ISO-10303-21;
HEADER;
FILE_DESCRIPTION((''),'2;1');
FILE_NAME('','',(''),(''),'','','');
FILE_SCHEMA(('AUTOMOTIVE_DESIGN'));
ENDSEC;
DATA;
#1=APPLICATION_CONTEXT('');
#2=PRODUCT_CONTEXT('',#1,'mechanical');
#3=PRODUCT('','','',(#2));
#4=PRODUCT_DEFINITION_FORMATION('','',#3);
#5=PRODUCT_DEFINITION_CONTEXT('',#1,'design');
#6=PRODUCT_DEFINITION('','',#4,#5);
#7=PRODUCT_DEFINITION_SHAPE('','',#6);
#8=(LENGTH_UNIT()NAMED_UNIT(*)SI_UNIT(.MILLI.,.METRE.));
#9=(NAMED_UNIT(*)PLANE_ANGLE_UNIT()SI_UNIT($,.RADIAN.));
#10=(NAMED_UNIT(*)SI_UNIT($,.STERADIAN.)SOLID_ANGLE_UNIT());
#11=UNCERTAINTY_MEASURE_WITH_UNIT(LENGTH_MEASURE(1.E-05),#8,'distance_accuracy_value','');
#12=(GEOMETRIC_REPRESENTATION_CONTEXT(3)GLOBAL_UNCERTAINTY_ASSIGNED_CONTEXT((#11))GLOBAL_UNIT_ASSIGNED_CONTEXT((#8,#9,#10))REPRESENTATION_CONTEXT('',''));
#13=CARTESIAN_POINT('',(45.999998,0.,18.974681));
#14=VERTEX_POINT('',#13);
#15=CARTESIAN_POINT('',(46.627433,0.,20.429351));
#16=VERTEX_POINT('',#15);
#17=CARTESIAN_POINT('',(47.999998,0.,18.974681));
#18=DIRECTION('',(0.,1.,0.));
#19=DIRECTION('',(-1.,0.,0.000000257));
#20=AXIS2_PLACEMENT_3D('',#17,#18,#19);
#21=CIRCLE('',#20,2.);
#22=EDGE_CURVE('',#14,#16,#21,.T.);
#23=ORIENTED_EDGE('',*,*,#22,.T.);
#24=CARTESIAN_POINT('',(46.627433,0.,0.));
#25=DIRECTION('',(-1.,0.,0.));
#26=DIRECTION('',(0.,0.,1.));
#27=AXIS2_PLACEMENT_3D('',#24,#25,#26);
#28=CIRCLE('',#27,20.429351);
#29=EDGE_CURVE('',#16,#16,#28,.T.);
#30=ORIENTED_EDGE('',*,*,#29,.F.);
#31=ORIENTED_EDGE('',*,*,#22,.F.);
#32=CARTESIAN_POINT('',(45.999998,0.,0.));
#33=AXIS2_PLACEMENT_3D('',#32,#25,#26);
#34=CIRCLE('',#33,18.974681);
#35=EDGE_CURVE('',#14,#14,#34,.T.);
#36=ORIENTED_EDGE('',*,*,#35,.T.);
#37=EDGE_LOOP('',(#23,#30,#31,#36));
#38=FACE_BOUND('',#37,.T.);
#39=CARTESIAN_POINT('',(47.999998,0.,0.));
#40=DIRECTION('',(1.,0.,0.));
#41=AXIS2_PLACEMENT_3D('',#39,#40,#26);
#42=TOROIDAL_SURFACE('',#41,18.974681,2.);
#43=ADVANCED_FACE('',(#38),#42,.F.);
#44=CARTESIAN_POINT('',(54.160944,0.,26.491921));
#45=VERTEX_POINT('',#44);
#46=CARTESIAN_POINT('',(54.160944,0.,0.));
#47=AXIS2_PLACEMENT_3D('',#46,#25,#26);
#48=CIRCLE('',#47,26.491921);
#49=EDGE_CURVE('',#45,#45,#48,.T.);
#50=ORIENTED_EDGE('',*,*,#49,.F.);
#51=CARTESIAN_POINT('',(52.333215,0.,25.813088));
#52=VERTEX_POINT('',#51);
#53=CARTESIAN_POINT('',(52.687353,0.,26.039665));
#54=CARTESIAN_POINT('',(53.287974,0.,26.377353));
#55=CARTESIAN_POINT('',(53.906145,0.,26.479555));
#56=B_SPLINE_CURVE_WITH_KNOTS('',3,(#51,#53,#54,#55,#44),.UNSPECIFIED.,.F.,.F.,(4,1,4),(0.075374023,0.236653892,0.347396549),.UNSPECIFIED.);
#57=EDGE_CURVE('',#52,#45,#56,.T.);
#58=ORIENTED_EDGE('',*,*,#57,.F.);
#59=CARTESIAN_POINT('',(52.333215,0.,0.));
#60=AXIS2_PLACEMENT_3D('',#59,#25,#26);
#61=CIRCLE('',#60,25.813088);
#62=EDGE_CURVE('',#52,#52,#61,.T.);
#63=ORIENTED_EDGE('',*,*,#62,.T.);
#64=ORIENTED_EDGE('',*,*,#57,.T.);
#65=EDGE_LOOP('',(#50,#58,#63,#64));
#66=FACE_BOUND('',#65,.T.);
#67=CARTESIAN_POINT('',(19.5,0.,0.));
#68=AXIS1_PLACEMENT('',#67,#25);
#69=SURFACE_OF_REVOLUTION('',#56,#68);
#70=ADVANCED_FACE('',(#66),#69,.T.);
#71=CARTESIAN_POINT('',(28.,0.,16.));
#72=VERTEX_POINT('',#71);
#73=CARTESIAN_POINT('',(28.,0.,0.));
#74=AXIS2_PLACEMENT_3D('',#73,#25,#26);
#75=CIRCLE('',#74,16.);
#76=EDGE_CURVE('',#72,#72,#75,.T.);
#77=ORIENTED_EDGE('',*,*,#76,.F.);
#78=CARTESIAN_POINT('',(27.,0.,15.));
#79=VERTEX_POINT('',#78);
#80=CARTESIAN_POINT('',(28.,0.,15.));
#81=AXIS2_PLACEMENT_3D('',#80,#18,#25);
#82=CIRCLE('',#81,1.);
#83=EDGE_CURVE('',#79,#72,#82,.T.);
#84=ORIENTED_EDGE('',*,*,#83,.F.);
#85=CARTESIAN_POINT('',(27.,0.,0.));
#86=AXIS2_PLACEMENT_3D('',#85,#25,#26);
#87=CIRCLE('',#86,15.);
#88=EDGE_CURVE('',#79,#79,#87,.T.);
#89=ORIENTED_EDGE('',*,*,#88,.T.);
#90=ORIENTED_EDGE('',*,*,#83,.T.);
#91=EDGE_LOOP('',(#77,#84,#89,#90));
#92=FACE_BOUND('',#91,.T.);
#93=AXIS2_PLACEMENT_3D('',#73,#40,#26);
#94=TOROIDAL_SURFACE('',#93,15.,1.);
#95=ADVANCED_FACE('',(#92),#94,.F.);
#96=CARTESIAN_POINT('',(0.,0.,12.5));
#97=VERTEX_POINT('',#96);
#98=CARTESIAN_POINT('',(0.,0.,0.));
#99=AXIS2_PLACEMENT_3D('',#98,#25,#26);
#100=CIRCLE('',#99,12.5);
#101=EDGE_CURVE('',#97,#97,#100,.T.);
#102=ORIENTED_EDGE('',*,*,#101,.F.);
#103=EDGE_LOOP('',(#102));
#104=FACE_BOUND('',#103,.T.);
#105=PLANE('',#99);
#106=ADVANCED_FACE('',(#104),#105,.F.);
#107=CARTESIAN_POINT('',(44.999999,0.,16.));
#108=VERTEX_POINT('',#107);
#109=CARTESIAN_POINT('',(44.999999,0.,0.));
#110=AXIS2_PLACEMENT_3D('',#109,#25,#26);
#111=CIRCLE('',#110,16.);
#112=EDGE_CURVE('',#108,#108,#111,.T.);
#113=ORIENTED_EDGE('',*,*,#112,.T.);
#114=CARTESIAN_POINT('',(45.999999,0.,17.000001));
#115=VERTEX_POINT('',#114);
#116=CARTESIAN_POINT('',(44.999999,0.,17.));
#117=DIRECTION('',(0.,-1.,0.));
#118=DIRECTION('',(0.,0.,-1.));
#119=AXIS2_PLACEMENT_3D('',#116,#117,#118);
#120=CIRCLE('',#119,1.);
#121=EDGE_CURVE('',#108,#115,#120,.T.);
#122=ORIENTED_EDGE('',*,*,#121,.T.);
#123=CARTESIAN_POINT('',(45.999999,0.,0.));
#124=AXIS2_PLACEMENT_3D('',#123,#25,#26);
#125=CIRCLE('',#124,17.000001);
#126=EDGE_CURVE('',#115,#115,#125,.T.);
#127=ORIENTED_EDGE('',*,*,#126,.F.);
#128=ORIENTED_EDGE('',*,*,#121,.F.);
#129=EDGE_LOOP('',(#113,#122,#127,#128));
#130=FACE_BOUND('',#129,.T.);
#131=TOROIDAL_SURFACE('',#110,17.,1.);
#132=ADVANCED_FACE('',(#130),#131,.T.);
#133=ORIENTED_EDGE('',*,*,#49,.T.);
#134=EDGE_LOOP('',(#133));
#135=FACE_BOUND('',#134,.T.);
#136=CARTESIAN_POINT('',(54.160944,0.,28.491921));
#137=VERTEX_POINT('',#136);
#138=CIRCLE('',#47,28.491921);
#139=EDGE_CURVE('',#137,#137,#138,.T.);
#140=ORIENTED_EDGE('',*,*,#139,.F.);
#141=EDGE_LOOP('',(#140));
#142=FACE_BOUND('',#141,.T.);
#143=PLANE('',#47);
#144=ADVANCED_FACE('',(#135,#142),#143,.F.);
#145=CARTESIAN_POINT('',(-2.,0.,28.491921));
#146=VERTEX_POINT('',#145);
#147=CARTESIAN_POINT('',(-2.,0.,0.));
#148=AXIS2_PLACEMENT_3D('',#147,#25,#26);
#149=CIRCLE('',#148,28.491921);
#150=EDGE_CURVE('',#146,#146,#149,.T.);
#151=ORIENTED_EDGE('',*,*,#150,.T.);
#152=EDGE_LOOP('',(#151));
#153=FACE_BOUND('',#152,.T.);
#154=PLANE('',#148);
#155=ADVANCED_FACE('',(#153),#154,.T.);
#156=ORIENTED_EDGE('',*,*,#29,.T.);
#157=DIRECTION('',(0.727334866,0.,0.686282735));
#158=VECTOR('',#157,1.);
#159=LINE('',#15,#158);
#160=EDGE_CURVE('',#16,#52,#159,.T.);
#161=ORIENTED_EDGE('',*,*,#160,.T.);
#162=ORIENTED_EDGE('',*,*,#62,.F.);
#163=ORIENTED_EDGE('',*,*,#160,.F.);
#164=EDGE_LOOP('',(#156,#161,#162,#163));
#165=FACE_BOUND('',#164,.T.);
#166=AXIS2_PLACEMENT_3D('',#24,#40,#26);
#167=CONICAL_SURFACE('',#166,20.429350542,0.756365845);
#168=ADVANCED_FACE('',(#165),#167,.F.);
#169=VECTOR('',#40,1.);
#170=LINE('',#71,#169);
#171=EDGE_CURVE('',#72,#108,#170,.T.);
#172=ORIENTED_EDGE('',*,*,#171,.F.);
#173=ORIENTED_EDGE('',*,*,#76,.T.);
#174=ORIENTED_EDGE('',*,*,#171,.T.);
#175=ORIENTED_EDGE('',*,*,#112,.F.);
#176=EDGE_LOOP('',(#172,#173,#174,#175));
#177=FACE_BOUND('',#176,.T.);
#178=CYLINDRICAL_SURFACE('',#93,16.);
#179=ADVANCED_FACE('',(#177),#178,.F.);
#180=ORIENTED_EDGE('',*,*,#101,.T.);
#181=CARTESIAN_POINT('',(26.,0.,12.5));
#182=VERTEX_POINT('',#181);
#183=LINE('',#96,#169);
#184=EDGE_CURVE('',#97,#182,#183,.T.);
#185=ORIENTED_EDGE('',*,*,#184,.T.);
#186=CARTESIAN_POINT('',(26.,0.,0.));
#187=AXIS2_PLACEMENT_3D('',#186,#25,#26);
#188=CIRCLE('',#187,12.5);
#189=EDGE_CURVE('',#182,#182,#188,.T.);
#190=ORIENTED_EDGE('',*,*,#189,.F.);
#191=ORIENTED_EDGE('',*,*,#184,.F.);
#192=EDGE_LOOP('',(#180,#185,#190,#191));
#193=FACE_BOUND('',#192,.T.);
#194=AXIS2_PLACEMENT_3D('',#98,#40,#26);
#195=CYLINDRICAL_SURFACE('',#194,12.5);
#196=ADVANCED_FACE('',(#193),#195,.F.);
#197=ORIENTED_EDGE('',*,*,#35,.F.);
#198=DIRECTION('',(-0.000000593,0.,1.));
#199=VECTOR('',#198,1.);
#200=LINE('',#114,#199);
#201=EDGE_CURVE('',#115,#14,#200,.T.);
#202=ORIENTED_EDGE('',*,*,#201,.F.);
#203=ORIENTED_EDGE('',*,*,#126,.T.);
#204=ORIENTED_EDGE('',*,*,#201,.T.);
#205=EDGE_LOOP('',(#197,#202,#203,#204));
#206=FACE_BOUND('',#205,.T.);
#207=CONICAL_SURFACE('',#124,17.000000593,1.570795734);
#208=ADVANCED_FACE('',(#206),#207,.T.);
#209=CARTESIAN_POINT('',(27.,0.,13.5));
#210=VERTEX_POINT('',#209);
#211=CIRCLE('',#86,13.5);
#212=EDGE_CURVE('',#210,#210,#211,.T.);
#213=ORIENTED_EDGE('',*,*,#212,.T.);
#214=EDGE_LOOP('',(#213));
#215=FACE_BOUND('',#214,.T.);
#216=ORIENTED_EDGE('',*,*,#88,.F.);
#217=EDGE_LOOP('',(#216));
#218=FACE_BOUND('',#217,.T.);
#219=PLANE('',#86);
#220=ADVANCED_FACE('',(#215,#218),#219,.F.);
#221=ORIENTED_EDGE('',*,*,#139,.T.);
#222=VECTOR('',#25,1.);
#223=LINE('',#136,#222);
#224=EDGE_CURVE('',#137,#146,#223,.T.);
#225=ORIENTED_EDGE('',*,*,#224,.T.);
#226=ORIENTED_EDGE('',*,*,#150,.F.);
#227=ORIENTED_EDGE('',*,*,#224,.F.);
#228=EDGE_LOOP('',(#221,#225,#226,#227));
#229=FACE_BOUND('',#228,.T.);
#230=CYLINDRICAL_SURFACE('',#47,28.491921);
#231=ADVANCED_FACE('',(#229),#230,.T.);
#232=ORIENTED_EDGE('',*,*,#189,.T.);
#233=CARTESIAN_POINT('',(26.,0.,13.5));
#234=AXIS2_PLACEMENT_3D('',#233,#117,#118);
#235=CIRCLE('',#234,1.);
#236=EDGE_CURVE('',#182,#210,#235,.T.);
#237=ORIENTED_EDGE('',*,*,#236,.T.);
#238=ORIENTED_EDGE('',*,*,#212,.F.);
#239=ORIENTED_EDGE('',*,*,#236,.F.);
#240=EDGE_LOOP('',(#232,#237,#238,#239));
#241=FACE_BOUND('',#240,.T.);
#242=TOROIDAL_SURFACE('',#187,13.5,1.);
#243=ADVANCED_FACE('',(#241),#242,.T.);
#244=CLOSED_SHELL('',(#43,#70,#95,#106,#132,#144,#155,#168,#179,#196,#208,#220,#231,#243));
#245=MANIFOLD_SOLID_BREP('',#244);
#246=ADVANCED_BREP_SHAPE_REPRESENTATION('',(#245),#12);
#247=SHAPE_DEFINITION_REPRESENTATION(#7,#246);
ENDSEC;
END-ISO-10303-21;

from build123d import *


with BuildPart() as f1:
    # F0 (on Front) → F1 (revolve)
    with BuildSketch(Plane.XZ):
        with BuildLine():
            Line((46.6274327665, 20.4293505417), (52.3332152067, 25.8130880211))
            add(Edge.make_bspline(
                [(52.3332152067, 25.8130880211), (52.6873531533, 26.0396653478), (53.287973728, 26.3773534836), (53.9061448765, 26.4795545854), (54.1609440093, 26.4919212472)],
                knots=[0.0753740232, 0.0753740232, 0.0753740232, 0.0753740232, 0.236653892, 0.3473965491, 0.3473965491, 0.3473965491, 0.3473965491], degree=3))
            Line((54.1609440093, 26.4919212472), (54.1609440093, 28.4919212472))
            Line((54.1609440093, 28.4919212472), (0, 28.4919212472))
            Line((0, 28.4919212472), (-2, 28.4919212472))
            Line((-2, 28.4919212472), (-2, 0))
            Line((-2, 0), (0, 0))
            Line((0, 0), (0, 12.5))
            Line((0, 12.5), (26, 12.5))
            ThreePointArc((26, 12.5), (26.7071067812, 12.7928932188), (27, 13.5))
            Line((27, 13.5), (27, 15))
            ThreePointArc((27, 15), (27.2928932188, 15.7071067812), (28, 16))
            Line((28, 16), (44.9999994072, 16))
            ThreePointArc((44.9999994072, 16), (45.707106398, 16.2928934284), (45.9999994072, 17.0000005928))
            Line((45.9999994072, 17.0000005928), (45.9999982367, 18.9746813235))
            ThreePointArc((45.9999982367, 18.9746813235), (46.1635437461, 19.7667886958), (46.6274327665, 20.4293505417))
        make_face()
    revolve(axis=Axis((19.5, 0, 0), (-1, 0, 0)))


solid = f1.part
